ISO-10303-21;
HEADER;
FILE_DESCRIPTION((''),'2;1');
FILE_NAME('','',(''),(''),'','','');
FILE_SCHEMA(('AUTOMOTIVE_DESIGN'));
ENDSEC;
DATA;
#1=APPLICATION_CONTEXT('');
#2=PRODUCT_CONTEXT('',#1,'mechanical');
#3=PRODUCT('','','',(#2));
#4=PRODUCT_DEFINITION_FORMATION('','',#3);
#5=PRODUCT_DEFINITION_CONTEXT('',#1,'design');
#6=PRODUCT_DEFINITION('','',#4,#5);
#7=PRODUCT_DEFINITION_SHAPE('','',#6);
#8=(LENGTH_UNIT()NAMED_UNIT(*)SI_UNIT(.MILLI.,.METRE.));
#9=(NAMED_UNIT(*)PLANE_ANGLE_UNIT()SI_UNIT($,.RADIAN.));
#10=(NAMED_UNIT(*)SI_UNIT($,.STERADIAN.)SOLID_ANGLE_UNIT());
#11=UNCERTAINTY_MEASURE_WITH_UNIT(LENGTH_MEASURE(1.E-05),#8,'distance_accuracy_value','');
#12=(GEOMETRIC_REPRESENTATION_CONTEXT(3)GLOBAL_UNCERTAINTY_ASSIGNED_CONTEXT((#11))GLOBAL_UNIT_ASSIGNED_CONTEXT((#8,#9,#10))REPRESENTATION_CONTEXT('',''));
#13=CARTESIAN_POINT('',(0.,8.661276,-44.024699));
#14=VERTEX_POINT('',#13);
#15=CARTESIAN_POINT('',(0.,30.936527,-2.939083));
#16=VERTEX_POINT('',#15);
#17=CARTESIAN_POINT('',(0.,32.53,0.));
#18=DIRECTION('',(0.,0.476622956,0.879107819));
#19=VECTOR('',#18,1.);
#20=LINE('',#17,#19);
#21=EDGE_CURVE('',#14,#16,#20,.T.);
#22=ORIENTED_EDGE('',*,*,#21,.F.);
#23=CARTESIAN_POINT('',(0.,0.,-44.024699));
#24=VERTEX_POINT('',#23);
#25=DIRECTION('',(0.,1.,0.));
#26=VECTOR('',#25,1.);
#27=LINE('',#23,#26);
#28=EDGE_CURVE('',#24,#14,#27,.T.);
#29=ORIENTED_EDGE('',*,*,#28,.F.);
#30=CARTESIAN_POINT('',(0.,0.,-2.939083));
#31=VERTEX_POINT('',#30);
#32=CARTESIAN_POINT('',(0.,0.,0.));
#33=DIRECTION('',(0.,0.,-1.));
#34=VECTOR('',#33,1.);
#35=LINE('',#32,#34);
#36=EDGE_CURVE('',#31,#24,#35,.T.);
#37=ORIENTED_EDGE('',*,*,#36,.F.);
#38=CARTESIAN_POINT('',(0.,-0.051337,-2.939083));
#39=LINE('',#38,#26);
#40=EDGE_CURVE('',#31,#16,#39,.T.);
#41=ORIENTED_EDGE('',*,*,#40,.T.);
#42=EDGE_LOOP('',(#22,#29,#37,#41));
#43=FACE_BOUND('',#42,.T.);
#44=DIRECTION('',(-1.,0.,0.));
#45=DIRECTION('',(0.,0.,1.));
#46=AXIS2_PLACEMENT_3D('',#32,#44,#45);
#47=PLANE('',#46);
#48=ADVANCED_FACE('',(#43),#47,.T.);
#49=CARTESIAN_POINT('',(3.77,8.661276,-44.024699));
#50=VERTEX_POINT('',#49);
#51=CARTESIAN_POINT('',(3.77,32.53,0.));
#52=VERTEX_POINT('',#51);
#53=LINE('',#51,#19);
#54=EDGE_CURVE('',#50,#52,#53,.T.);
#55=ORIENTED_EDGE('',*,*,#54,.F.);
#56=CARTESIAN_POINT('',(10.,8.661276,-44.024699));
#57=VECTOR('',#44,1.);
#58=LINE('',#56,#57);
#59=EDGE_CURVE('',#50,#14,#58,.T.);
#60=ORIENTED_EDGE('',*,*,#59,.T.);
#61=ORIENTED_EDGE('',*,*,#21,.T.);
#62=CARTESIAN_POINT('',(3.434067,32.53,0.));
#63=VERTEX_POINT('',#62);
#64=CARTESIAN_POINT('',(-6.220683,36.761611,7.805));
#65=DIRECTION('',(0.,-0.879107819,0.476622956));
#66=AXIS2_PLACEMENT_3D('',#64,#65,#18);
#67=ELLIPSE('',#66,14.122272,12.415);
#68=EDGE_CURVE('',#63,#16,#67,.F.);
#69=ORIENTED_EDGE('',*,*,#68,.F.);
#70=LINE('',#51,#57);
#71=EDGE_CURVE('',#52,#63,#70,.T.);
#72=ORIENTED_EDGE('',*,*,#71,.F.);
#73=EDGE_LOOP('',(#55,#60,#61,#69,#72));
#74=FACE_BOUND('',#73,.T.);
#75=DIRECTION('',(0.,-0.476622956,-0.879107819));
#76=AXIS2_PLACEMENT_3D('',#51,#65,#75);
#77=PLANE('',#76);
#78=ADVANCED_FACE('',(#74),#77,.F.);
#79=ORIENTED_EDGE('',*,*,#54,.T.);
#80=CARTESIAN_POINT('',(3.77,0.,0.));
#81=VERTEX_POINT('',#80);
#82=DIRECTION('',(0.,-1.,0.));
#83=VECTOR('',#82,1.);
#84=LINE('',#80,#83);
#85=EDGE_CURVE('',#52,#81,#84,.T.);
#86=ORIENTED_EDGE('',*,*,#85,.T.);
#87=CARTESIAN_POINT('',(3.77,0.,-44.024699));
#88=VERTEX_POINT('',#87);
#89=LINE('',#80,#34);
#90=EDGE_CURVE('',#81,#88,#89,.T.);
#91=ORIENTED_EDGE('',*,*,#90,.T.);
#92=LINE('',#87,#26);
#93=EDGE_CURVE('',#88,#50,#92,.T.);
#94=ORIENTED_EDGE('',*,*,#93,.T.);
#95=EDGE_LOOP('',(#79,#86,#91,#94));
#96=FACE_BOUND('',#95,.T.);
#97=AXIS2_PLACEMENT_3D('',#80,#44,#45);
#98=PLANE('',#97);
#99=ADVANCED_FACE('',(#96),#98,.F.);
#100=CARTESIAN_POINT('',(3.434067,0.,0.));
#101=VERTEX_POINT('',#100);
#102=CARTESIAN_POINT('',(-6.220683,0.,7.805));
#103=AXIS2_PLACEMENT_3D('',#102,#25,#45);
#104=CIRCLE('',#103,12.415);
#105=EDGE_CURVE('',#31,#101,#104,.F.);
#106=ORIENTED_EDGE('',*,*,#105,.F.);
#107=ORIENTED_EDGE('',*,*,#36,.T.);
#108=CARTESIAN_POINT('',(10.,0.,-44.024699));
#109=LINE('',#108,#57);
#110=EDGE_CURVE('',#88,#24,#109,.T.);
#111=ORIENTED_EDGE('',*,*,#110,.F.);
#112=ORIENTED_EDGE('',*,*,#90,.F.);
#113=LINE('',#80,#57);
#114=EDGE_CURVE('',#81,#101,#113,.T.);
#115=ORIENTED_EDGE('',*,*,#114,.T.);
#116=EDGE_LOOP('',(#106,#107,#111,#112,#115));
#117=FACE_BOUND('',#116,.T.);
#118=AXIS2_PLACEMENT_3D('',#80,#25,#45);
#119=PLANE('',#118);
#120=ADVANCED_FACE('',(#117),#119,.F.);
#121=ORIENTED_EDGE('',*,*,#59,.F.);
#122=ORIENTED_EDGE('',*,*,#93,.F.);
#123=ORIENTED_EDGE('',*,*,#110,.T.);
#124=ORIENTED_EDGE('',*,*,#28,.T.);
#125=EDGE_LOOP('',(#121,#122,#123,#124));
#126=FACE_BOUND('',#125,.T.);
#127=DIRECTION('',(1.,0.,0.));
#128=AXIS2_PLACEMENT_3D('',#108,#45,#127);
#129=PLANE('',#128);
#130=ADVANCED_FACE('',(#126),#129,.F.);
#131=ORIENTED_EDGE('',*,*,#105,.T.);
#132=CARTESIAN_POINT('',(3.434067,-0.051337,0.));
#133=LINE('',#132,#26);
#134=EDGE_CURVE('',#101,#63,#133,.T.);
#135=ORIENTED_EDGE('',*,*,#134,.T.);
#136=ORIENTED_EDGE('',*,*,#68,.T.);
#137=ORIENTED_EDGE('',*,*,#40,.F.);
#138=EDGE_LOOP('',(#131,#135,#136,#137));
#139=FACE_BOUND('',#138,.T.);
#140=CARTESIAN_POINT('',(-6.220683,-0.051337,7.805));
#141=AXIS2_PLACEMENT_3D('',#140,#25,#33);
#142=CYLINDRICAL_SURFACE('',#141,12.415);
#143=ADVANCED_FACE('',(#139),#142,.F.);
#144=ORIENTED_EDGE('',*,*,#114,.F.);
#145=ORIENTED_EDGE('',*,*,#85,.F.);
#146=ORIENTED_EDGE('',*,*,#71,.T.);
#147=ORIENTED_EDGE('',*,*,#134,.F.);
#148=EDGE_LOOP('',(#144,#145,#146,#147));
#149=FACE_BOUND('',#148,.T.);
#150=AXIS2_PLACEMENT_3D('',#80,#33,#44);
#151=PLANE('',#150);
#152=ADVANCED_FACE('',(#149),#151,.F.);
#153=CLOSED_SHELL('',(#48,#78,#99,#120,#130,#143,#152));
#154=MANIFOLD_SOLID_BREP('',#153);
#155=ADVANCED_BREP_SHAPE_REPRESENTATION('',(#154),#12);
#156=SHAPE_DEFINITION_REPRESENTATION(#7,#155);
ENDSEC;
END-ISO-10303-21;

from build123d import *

# Parameters (mm, degrees)
BOSS_EXTRUDE1_DEPTH = 3.77
FILLET1_R           = 0.2
CAVITY1_DEPTH       = 32.53
CUT_EXTRUDE1_DEPTH  = 10


# Read off the part's stored shape, not the designer's step: Cavity1
with BuildPart() as part:
    # Sketch1 → Boss-Extrude1 (new body)
    with BuildSketch(Plane(origin=(0, 0, 0), x_dir=(0, 0, -1), z_dir=(1, 0, 0))):
        Polygon((0, 0), (60, 0), (0, 32.53), align=None)
    extrude(amount=BOSS_EXTRUDE1_DEPTH)

    # Fillet1
    fillet1_edges = [part.edges().sort_by_distance(p)[0] for p in [
        (1.885, 0, -60),
    ]]
    fillet(fillet1_edges, radius=FILLET1_R)

    # Cavity1 outline → Cavity1 (cut)
    with BuildSketch(Plane(origin=(0, 0, 0), x_dir=(1, 0, 0), z_dir=(0, 1, 0))):
        with BuildLine():
            Line((0, 0), (3.434066763, 0))
            ThreePointArc((3.434066763, 0), (1.851918424, 1.627143202), (0, 2.939083185))
            Line((0, 2.939083185), (0, 0))
        make_face()
    extrude(amount=CAVITY1_DEPTH, mode=Mode.SUBTRACT)

    # Sketch2 → Cut-Extrude1 (cut)
    with BuildSketch(Plane.ZY):
        Polygon((-44.024699242, 0), (-44.024699242, 8.661275561), (-59.306815437, 0.375821564), (-59.211490846, 0), align=None)
    extrude(amount=-CUT_EXTRUDE1_DEPTH, mode=Mode.SUBTRACT)


with BuildPart() as body_2:
    # of the pieces the cut leaves, the one that is kept (cut_extrude1_keep)
    add(part.part.solids().sort_by_distance((0, 0, -2.939083185))[0])


solid = body_2.part
